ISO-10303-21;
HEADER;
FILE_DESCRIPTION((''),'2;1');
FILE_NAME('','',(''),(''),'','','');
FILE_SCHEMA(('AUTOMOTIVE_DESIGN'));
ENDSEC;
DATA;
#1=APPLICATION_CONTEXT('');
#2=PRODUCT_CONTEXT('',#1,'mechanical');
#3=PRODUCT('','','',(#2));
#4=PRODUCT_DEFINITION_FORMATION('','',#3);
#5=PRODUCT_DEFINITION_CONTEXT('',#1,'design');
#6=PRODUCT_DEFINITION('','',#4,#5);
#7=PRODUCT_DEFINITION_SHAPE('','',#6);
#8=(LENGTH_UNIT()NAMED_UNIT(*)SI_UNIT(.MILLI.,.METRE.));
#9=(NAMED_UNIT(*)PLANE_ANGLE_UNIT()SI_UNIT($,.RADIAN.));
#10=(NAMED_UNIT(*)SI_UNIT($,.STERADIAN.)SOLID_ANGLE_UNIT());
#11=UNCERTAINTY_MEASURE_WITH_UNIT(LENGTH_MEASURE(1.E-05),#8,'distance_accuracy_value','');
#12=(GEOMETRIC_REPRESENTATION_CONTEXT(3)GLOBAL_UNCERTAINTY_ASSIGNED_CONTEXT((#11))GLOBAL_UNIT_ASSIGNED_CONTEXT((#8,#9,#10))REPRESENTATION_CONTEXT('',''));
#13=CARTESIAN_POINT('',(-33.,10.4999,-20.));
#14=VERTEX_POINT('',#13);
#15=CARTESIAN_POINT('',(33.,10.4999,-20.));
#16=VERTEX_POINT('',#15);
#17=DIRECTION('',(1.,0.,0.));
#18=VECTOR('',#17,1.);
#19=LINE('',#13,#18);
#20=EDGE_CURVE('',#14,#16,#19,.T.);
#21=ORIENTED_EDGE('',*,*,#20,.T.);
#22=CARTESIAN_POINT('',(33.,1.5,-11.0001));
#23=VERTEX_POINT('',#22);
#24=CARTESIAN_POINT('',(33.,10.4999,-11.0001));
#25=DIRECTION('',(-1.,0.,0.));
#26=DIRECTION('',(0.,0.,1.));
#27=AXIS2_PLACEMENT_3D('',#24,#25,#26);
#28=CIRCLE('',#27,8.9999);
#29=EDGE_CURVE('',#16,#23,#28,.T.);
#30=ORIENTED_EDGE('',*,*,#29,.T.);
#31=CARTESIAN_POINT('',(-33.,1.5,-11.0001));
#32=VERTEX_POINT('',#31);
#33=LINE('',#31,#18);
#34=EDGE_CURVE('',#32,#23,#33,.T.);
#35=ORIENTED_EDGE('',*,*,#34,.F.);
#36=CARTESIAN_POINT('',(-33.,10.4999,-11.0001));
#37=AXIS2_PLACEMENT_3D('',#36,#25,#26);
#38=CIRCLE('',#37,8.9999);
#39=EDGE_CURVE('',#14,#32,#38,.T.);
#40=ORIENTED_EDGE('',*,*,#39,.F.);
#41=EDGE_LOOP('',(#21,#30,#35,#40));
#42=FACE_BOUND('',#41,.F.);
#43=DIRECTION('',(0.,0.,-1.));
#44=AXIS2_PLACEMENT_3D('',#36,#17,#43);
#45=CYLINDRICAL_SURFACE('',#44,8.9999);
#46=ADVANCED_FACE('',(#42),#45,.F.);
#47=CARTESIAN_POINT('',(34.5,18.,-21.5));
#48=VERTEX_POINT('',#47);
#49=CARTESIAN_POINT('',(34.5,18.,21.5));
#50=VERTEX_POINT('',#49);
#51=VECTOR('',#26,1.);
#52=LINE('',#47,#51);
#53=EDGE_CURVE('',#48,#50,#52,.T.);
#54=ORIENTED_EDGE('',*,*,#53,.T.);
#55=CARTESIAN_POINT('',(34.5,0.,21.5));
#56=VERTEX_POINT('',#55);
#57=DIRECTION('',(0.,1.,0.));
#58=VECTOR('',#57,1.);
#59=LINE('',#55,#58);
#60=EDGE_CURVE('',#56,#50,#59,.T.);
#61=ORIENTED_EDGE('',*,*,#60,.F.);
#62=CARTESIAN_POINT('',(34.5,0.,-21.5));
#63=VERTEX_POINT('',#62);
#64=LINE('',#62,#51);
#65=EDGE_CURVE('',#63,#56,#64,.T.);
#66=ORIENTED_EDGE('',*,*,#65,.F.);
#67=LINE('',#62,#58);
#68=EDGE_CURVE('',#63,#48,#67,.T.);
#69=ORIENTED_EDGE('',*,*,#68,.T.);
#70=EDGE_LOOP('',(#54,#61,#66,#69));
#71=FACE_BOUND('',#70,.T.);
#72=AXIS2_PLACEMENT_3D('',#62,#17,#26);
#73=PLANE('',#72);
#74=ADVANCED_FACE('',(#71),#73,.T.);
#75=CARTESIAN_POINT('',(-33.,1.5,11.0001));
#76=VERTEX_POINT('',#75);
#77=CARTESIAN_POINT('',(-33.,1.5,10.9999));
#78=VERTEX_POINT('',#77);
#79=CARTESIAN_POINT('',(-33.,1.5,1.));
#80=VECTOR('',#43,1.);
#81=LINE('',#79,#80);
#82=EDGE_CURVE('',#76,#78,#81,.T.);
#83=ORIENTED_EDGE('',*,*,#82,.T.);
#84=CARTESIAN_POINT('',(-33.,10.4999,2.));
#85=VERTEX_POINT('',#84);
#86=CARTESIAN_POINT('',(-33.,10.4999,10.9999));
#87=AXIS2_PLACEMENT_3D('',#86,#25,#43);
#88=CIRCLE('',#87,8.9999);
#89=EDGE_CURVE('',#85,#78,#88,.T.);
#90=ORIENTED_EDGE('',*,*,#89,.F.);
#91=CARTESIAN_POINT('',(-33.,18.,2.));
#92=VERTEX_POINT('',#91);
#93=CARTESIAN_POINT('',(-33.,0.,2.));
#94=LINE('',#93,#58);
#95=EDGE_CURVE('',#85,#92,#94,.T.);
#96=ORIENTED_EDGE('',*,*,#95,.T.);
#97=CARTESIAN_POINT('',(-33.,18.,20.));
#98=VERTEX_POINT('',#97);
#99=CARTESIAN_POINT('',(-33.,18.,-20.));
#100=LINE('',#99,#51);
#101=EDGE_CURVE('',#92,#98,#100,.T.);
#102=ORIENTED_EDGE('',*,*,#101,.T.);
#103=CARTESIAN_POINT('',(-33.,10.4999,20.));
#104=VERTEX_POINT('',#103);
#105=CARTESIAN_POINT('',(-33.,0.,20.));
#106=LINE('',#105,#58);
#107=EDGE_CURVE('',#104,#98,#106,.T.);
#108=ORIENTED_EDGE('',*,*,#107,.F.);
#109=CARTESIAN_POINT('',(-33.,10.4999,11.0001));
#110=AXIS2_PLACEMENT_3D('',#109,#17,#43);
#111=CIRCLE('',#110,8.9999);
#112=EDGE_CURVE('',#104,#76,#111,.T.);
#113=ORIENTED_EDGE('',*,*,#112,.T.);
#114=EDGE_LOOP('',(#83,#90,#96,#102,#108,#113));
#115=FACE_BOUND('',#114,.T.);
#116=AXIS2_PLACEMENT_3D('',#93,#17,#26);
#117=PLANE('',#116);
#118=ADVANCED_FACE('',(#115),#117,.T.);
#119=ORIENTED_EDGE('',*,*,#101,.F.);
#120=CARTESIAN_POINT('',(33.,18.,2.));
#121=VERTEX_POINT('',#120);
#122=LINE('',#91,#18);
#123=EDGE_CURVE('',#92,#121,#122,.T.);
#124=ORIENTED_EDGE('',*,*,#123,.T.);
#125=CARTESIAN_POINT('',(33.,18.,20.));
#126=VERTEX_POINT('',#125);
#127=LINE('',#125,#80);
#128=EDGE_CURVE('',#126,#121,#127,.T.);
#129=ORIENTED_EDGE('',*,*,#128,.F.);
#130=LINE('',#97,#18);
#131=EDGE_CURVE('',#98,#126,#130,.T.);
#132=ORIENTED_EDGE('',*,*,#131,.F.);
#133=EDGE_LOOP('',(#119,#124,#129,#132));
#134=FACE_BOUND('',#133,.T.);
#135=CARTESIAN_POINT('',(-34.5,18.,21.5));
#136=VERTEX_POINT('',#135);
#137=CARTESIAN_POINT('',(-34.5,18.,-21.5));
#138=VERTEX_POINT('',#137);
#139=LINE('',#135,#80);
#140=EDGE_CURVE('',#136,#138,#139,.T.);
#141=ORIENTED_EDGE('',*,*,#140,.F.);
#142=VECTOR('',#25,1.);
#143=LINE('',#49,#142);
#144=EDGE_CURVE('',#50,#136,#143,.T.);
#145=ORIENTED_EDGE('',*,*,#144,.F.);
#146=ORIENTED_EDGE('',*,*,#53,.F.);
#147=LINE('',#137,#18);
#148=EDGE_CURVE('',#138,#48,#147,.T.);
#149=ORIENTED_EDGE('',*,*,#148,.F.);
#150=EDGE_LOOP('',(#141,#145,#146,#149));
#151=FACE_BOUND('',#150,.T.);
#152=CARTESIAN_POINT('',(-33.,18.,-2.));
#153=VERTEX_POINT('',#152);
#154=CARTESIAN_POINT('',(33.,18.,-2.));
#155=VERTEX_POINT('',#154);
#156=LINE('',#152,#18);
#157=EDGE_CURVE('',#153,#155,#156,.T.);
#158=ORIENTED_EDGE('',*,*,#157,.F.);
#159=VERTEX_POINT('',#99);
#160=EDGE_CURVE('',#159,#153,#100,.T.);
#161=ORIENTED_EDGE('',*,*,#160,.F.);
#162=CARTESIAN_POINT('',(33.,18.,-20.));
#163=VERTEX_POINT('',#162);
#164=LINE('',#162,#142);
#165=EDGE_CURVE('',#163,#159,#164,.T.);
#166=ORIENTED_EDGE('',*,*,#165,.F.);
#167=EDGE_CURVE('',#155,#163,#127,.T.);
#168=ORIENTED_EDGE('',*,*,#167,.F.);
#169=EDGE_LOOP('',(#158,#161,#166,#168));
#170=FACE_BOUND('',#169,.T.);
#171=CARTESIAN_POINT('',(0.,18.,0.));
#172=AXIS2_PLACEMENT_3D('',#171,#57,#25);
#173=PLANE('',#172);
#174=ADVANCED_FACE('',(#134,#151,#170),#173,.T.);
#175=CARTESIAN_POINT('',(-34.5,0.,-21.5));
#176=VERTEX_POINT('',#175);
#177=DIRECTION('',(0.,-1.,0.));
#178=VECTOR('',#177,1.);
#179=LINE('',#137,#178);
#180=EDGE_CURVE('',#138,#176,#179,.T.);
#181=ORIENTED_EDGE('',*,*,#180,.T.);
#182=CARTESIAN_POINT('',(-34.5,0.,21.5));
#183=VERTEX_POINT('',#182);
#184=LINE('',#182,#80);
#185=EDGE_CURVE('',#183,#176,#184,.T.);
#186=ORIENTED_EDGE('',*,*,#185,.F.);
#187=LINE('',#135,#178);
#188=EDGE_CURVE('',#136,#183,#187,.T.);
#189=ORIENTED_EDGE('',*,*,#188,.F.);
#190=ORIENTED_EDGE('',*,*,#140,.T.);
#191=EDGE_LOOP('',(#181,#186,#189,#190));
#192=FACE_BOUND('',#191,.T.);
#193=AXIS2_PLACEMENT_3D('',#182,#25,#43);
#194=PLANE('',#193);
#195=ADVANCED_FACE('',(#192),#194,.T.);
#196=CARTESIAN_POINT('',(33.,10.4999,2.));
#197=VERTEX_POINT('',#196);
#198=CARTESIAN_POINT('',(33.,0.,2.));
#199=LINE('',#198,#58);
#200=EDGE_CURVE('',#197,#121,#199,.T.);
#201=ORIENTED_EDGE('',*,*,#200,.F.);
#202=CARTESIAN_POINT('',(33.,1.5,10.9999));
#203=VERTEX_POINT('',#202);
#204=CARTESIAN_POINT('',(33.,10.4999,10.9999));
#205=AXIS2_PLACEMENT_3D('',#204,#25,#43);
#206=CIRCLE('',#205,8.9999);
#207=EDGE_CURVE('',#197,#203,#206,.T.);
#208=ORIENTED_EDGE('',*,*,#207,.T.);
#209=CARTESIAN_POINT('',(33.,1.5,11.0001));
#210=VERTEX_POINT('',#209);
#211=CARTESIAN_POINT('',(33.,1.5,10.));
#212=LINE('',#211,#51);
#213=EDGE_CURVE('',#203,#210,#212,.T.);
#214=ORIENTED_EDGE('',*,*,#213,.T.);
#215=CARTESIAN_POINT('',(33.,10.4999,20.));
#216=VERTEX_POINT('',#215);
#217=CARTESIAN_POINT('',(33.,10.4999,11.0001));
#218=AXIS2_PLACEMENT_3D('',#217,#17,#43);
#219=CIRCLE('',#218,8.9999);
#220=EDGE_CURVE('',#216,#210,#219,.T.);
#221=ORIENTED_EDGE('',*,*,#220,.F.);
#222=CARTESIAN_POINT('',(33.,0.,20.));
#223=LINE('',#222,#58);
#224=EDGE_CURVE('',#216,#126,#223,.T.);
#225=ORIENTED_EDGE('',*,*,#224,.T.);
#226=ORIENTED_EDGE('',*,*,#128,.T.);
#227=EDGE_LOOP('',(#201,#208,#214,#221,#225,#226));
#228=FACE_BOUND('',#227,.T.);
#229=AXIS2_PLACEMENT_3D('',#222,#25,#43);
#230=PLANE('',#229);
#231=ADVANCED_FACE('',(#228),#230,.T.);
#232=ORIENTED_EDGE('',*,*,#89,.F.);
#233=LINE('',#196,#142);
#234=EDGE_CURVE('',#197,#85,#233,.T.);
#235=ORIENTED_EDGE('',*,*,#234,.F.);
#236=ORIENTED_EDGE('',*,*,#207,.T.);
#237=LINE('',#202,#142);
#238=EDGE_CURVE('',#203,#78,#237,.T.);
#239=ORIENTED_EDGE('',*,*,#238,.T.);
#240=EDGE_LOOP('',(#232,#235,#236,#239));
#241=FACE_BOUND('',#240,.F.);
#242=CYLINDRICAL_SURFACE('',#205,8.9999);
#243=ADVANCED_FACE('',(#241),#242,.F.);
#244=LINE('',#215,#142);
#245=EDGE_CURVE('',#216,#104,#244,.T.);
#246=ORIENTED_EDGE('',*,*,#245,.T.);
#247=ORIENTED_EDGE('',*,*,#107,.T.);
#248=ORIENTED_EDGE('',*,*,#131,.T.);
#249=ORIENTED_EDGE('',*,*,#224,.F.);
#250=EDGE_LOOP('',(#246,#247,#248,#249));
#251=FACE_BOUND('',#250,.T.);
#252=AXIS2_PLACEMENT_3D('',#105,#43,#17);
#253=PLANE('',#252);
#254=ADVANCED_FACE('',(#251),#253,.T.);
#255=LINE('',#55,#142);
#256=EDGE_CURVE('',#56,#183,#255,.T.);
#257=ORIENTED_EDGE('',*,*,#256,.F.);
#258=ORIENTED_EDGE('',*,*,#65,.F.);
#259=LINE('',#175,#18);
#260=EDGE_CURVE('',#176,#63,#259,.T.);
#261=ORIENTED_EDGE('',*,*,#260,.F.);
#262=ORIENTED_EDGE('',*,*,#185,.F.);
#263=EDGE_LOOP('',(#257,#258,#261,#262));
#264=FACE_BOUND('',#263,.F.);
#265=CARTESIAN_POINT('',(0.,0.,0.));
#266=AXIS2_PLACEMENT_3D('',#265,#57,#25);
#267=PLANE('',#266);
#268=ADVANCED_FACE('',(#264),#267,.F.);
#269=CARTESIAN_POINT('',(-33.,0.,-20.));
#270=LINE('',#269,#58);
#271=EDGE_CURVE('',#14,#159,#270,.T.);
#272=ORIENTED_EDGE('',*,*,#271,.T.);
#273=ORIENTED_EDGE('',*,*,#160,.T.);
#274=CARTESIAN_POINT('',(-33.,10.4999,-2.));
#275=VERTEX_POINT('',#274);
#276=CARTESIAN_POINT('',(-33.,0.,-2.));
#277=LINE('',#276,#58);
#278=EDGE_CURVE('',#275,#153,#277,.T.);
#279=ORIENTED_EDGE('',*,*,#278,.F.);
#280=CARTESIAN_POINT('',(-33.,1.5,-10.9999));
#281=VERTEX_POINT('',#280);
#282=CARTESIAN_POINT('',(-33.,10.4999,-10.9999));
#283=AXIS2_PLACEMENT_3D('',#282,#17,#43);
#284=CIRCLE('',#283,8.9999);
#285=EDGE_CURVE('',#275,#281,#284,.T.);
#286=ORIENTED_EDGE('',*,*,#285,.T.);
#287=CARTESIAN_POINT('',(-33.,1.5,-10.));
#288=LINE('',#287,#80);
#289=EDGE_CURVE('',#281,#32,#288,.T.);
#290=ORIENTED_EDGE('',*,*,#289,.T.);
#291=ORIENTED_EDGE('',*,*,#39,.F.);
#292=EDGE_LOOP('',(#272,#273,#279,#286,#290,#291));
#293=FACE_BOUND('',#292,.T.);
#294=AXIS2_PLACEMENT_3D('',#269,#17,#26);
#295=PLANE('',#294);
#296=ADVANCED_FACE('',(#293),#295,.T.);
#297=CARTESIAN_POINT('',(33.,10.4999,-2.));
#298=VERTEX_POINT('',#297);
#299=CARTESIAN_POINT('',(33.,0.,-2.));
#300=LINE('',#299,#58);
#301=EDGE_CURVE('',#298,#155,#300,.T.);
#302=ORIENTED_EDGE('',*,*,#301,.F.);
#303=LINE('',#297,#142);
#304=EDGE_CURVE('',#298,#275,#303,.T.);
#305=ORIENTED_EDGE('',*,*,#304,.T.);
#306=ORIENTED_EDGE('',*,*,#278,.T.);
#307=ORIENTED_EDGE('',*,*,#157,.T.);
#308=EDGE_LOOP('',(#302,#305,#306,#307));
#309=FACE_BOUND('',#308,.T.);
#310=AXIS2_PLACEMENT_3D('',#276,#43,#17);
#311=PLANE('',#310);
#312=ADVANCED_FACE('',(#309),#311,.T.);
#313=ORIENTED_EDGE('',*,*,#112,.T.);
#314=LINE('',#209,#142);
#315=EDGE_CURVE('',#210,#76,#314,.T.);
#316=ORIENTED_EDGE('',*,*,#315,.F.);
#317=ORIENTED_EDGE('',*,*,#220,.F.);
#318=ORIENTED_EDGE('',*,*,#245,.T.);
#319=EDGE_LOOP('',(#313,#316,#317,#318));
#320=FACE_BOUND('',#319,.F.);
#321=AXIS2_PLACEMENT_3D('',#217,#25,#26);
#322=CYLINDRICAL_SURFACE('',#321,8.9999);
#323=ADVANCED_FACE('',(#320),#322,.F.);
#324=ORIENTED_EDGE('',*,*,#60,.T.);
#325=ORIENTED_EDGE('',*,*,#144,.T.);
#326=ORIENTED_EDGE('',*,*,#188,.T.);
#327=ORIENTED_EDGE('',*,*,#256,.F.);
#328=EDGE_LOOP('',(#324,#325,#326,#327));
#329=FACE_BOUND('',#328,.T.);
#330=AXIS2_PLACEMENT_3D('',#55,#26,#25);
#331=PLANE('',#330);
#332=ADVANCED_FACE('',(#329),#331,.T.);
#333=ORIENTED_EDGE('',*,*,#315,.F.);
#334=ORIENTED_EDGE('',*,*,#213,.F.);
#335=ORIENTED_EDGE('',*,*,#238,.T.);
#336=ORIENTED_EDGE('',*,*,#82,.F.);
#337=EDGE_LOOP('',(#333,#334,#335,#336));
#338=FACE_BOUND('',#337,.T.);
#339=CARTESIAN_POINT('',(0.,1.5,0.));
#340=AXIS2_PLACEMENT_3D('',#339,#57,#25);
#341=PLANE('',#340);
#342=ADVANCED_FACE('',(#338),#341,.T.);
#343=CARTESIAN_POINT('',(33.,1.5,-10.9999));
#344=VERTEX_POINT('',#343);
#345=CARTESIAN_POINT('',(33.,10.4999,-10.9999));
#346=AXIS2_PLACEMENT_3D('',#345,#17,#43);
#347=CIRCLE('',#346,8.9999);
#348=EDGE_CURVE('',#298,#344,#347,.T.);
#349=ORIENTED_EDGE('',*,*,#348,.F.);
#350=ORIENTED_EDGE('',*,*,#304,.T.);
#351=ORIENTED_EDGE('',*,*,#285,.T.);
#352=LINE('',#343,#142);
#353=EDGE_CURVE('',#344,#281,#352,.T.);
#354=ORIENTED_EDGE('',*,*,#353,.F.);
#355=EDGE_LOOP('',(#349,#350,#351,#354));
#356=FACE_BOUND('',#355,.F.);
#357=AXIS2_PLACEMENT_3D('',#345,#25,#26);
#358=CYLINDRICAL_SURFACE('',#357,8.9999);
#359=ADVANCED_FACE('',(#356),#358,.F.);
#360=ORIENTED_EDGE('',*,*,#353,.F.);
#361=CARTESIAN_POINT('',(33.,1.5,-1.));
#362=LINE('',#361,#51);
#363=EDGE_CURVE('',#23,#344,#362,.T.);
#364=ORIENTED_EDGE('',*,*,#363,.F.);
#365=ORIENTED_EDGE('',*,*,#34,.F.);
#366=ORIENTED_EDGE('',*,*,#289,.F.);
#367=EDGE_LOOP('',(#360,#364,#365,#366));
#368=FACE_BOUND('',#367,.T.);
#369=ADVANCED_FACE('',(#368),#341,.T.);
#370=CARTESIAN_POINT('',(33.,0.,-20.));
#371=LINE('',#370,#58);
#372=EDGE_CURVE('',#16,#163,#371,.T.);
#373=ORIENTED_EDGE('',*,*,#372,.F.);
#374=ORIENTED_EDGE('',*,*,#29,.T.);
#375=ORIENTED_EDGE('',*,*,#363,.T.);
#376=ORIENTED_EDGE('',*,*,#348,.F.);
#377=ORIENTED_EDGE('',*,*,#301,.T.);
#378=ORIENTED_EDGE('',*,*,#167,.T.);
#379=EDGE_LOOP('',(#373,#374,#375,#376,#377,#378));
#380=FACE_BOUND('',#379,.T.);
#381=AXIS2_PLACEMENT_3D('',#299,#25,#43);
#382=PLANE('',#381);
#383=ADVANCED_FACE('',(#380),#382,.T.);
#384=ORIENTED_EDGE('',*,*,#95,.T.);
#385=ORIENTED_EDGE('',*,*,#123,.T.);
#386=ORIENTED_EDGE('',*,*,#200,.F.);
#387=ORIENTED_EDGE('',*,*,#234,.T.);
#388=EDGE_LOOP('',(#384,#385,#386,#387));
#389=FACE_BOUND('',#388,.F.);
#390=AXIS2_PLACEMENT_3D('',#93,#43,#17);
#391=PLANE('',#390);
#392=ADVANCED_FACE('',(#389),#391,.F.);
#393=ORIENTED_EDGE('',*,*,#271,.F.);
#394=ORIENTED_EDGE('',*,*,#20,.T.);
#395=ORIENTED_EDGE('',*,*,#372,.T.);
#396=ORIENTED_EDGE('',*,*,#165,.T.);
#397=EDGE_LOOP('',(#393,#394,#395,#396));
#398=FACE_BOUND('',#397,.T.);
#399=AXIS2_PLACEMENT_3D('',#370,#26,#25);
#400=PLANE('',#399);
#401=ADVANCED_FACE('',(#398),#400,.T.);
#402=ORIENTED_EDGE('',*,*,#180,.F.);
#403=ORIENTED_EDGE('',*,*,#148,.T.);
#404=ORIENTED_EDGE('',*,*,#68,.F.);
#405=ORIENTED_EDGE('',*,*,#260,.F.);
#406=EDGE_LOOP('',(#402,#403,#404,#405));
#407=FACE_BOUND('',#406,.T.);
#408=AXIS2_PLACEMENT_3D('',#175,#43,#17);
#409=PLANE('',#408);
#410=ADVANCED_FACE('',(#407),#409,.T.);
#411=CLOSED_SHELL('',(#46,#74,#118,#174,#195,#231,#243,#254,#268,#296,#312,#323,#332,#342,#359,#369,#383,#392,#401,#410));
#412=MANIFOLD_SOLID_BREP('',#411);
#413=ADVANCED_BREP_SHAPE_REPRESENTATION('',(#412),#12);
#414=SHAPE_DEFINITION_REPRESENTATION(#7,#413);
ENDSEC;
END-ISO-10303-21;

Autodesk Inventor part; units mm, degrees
ref_plane "YZ Plane" through (0, 0, 0) normal (1, 0, 0) x (0, 1, 0)
ref_plane "XZ Plane" through (0, 0, 0) normal (0, 1, 0) x (-1, 0, 0)
ref_plane "XY Plane" through (0, 0, 0) normal (0, 0, 1) x (1, 0, 0)
sketch "Sketch1" plane through (0, 0, 0) normal (0, 1, 0) x (-1, 0, 0)
  line L0 (33, 20) -> (-33, 20)
  line L1 (-33, 20) -> (-33, -20)
  line L2 (-33, -20) -> (33, -20)
  line L3 (33, -20) -> (33, 20)
  line L4 (33, 2) -> (-33, 2)
  line L5 (33, -2) -> (-33, -2)
  line L6 (-34.5, 21.5) -> (34.5, 21.5)
  line L7 (34.5, 21.5) -> (34.5, -21.5)
  line L8 (34.5, -21.5) -> (-34.5, -21.5)
  line L9 (-34.5, -21.5) -> (-34.5, 21.5)
  point P0 (0, 0)
  dimension "d0" = 66
  dimension "d1" = 33
  dimension "d2" = 40
  dimension "d3" = 20
  dimension "d4" = 18
  dimension "d5" = 18
  dimension "d6" = 1.5
extrude "Extrusion1" add sketch "Sketch1" along normal blind 1.5 contours L3 L4 L1 L0 | L3 L5 L1 L4 | L3 L2 L1 L5 | L6 L7 L8 L9
sketch "Sketch2" plane through (0, 1.5, 0) normal (0, 1, 0) x (1, 0, 0)
  point P0 (0, 0)
extrude "Extrusion2" add sketch "Sketch1" along normal blind 18 contours L3 L5 L1 L4 | L6 L7 L8 L9
fillet "Fillet1" radius 9 4 edges at (0, 1.5, 2) (0, 1.5, 20) (0, 1.5, -2) (0, 1.5, -20)
equation "\"d1\" = 0.5 * d0"
equation "\"d3\" = 0.5 * d2"
properties part number "battery rack"
